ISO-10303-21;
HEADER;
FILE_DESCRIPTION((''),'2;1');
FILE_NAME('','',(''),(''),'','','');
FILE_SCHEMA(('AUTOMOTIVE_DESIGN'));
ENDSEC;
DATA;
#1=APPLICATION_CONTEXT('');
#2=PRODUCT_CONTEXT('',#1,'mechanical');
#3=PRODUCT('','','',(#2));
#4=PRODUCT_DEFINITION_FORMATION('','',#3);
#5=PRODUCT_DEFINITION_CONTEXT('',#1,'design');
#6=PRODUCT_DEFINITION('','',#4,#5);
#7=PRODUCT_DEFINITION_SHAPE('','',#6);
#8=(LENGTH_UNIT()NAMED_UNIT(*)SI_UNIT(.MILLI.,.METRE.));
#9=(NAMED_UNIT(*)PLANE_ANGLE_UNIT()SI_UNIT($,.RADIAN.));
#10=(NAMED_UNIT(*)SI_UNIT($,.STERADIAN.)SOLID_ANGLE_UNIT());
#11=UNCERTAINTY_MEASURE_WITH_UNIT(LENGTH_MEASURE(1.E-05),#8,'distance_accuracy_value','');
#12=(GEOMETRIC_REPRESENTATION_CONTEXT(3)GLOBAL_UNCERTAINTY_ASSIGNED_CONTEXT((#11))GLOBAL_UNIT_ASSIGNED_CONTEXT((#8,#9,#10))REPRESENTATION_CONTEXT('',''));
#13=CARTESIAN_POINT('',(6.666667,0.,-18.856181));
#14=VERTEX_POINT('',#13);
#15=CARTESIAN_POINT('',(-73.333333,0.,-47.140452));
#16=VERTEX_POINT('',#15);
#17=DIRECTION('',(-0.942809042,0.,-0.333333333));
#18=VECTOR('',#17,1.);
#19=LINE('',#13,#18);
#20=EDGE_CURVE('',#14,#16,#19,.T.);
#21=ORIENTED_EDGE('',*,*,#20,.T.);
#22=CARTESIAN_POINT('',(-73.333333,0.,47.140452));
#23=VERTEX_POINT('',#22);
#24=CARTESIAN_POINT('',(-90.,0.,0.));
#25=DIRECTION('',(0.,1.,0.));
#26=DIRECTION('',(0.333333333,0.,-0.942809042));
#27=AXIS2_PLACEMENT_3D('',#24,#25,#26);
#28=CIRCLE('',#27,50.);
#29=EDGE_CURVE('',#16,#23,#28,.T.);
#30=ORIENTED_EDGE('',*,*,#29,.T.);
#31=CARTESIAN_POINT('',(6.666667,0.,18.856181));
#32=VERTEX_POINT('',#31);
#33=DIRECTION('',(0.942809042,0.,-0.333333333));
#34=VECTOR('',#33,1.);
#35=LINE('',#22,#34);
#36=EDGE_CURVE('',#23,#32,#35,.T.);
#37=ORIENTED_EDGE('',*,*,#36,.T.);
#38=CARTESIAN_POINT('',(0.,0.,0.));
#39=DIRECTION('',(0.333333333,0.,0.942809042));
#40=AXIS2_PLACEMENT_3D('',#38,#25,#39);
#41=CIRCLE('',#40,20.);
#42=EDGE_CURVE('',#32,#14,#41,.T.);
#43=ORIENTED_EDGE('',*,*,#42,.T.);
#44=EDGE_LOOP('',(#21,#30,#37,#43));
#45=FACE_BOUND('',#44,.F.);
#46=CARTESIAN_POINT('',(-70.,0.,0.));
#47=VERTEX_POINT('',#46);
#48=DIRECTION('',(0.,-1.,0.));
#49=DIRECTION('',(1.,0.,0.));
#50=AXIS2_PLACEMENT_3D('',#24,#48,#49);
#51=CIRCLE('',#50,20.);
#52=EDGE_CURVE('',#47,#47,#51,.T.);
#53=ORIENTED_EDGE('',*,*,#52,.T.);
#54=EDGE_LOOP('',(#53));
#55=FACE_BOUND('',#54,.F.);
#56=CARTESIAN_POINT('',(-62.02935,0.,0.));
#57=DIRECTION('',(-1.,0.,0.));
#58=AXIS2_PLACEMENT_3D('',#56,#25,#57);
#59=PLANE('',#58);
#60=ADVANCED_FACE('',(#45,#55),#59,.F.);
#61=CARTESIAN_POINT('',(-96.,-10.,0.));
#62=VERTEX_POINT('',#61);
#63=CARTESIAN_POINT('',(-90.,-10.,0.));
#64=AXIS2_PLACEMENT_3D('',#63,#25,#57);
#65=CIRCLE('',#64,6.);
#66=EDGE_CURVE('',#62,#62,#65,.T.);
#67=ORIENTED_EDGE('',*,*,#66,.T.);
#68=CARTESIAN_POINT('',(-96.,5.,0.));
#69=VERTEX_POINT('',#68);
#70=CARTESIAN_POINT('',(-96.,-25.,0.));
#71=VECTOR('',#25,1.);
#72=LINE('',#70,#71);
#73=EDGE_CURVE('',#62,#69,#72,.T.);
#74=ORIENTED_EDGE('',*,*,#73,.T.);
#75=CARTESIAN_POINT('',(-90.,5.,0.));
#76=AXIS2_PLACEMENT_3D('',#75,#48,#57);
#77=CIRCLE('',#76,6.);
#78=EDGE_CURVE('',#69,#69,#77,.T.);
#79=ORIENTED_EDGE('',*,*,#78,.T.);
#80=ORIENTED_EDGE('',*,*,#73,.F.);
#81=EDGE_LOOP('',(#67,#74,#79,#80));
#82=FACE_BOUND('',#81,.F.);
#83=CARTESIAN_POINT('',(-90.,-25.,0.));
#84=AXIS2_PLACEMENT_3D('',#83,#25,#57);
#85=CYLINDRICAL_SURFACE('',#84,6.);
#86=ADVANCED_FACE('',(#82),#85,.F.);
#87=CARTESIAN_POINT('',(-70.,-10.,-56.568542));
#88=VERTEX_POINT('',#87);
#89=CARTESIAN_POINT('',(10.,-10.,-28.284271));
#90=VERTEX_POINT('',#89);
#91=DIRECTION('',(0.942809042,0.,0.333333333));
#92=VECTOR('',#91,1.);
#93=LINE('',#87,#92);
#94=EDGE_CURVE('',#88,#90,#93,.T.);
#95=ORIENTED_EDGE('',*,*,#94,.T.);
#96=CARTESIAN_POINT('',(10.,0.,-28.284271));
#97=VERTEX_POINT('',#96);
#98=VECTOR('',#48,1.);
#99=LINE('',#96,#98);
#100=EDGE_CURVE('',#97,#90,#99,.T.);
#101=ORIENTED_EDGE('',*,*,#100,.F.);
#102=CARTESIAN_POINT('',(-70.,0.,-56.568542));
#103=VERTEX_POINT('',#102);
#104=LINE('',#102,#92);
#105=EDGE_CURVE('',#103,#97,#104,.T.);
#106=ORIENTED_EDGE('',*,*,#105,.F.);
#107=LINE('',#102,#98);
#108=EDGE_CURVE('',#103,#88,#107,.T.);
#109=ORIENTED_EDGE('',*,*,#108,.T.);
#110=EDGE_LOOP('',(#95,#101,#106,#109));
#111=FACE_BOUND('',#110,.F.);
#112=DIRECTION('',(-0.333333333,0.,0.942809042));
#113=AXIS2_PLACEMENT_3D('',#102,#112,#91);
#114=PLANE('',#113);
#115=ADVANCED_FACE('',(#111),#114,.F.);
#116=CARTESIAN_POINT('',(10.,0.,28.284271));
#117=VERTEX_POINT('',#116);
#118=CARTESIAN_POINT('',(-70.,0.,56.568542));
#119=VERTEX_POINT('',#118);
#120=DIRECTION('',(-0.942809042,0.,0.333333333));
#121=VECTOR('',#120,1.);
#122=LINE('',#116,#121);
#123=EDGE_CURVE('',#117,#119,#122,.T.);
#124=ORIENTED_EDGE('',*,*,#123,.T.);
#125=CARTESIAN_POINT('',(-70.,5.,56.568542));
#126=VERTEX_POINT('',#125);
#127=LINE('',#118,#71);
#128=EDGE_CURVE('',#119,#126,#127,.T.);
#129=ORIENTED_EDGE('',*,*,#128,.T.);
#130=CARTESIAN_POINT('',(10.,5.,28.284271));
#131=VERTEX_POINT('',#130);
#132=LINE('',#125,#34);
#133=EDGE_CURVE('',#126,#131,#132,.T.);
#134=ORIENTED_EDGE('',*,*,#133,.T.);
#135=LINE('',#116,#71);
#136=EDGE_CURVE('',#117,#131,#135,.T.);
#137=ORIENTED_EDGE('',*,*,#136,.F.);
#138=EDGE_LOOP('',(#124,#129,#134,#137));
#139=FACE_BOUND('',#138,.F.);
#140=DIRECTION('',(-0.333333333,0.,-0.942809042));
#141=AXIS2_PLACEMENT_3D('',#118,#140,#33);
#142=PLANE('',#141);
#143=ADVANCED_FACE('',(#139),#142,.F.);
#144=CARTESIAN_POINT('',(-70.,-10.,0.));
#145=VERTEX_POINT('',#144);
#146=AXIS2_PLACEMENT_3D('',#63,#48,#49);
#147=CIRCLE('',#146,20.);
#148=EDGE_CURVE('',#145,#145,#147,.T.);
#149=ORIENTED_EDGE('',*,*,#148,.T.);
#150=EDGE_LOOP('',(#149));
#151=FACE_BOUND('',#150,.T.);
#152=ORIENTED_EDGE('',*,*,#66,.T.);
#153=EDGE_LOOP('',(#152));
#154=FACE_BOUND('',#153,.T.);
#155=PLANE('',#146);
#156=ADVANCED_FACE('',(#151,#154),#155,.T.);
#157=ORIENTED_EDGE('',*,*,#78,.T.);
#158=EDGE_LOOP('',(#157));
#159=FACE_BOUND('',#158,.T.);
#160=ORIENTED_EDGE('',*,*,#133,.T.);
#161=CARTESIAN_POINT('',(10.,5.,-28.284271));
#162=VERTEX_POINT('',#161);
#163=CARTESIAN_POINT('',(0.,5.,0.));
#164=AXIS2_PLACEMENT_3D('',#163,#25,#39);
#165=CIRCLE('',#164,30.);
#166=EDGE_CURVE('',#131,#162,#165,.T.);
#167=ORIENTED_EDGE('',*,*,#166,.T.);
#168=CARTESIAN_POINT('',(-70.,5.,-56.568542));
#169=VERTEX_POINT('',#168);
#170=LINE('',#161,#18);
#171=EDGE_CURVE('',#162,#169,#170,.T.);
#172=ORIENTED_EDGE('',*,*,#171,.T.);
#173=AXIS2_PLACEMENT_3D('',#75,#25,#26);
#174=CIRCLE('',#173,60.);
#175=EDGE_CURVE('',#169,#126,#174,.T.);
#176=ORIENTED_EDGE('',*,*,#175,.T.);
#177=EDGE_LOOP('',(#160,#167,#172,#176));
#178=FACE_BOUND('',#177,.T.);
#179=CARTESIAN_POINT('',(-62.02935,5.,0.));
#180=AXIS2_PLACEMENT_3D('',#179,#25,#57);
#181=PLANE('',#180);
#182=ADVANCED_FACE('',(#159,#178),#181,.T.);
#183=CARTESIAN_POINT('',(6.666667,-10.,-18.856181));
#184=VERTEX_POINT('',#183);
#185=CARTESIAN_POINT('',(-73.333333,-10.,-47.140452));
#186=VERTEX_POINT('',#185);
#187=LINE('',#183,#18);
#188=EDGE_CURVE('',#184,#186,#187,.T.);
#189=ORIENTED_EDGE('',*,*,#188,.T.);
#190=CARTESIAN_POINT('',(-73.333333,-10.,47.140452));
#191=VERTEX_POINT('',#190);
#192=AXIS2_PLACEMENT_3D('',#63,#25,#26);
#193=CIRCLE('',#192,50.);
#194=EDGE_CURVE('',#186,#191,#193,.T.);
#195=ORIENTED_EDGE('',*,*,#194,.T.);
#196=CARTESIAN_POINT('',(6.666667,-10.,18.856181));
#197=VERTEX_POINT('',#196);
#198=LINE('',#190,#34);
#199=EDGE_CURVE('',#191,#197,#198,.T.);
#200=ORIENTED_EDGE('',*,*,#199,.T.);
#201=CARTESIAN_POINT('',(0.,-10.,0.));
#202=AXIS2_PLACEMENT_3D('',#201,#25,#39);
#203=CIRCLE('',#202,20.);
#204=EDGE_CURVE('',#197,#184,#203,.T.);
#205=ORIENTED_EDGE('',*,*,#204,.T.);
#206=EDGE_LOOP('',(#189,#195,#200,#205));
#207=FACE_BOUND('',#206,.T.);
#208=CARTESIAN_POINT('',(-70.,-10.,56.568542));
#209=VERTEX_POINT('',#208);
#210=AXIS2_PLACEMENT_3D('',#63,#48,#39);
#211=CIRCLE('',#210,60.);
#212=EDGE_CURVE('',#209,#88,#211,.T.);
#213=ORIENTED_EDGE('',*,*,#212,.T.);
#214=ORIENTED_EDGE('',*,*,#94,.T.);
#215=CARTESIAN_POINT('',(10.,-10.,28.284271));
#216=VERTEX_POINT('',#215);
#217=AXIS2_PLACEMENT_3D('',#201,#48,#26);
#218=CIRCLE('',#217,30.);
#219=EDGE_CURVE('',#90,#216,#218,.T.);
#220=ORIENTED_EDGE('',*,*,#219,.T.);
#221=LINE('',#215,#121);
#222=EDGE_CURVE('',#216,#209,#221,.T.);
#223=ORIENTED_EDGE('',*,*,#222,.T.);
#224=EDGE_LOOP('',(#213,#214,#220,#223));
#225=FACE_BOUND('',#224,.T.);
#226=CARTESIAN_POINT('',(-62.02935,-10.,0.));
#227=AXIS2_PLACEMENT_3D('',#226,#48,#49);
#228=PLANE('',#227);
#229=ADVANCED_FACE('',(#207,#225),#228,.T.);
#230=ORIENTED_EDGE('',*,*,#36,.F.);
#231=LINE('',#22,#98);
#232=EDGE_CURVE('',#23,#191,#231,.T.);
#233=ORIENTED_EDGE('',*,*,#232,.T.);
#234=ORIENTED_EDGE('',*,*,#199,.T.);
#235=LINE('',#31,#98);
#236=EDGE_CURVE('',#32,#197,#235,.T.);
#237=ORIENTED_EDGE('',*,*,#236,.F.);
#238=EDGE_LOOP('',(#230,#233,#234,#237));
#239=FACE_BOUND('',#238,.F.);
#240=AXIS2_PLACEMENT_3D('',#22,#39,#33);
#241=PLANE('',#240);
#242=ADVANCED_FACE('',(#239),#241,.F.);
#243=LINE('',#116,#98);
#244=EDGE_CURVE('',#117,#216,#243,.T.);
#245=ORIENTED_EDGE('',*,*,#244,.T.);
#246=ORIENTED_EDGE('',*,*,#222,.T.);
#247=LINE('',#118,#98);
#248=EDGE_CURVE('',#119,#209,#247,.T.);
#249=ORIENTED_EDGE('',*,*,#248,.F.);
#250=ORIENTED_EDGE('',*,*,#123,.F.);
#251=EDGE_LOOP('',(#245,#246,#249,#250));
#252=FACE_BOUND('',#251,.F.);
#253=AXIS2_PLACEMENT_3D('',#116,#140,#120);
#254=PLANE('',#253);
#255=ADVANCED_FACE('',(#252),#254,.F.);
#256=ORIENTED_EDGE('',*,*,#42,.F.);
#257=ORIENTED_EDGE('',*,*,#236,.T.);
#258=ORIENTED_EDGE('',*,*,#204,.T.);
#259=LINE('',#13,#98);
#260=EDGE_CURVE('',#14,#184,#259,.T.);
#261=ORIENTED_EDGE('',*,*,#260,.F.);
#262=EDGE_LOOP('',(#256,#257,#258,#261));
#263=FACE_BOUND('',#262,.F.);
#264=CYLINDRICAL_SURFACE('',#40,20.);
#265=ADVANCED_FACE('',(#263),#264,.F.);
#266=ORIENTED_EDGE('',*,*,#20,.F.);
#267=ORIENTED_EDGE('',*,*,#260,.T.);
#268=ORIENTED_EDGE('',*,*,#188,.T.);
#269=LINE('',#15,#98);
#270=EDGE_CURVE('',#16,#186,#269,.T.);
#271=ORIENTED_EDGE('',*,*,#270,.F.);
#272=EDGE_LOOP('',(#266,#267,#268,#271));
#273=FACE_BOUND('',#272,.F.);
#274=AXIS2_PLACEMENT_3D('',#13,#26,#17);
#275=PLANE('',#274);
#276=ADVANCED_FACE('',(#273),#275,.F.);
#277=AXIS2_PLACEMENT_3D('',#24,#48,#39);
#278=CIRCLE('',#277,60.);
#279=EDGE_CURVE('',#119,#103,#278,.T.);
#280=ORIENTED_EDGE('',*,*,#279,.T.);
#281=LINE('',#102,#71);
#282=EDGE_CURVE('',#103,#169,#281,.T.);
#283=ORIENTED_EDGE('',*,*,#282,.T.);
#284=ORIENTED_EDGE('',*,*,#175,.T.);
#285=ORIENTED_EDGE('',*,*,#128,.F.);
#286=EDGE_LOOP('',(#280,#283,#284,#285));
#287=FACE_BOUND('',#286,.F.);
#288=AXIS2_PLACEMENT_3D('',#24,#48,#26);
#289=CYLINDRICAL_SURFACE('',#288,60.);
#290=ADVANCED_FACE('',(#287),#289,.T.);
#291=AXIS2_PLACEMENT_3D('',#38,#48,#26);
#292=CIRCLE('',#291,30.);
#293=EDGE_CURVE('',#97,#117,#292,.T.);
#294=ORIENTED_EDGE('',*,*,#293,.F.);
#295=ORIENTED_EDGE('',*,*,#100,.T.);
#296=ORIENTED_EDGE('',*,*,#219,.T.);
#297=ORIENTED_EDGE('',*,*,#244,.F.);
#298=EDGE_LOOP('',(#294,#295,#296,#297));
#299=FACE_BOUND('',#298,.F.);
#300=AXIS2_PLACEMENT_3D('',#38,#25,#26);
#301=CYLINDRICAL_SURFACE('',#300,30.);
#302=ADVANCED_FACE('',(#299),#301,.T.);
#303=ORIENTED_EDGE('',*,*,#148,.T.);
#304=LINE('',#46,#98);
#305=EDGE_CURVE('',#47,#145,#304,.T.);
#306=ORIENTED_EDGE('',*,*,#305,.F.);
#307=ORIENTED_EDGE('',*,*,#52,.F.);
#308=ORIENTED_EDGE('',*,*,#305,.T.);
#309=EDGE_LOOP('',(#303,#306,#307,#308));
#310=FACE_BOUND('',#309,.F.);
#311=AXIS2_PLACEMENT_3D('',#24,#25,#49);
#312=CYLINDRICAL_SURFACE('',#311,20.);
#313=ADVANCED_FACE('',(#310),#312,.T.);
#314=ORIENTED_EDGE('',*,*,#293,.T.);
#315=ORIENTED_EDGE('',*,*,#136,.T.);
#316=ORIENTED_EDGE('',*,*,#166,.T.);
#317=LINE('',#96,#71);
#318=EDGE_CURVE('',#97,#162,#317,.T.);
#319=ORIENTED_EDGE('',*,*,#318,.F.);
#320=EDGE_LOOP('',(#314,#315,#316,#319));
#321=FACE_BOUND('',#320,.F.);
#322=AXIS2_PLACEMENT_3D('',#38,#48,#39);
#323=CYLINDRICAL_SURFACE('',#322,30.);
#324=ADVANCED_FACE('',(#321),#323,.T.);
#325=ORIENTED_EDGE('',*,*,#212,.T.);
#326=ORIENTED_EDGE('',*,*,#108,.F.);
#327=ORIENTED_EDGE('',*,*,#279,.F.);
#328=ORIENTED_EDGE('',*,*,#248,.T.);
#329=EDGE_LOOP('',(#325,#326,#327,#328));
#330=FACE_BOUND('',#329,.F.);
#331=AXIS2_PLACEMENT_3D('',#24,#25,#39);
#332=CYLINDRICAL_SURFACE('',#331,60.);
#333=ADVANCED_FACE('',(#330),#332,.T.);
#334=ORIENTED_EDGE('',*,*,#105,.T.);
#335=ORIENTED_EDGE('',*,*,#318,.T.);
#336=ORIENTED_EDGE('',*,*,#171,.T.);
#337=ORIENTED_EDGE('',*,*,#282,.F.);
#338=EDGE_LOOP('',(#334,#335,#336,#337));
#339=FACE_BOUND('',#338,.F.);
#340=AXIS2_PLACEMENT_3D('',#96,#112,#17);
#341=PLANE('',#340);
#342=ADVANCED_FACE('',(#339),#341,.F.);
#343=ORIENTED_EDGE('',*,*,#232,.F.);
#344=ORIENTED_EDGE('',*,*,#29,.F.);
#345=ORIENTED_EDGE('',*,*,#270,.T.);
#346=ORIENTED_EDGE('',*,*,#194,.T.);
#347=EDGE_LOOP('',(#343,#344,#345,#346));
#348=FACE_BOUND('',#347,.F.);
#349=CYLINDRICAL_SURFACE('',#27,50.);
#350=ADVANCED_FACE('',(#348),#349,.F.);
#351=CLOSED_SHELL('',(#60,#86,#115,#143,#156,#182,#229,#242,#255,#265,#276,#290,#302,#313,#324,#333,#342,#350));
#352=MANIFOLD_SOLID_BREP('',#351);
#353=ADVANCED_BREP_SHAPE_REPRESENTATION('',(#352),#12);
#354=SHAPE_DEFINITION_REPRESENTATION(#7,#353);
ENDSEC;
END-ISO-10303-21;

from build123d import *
from build123d import SkipClean  # not in build123d's __all__

# Parameters (mm, degrees)
F1_DEPTH = 10
F0_R     = 20
F3_DEPTH = 5
F5_D     = 12
F5_DEPTH = 15
F5_TIP   = 3.6051637142


# Not quite as in the source:
# - after a boolean that leaves OpenCascade's solid faulty, fix() repairs it


with BuildPart() as f1:
    # F0 (on Front) → F1 (new body)
    with BuildSketch(Plane.XZ):
        with BuildLine():
            Line((10, 28.2842712475), (-70, 56.5685424949))
            ThreePointArc((-70, 56.5685424949), (-150, 0), (-70, -56.5685424949))
            Line((-70, -56.5685424949), (10, -28.2842712475))
            ThreePointArc((10, -28.2842712475), (30, 0), (10, 28.2842712475))
        make_face()
        with BuildLine():
            ThreePointArc((-73.3333333333, -47.1404520791), (-140, 0), (-73.3333333333, 47.1404520791))
            Line((-73.3333333333, 47.1404520791), (6.6666666667, 18.8561808316))
            ThreePointArc((6.6666666667, 18.8561808316), (20, 0), (6.6666666667, -18.8561808316))
            Line((6.6666666667, -18.8561808316), (-73.3333333333, -47.1404520791))
        make_face(mode=Mode.SUBTRACT)
    extrude(amount=F1_DEPTH)



with BuildPart() as f1b:
    # F0 (on Front) → F1, piece 2 (new body)
    with BuildSketch(Plane.XZ):
        with Locations((-90, 0)):
            Circle(F0_R)
    extrude(amount=F1_DEPTH)


with BuildPart() as f1_1:
    add(f1.part, clean=False)

    with SkipClean():  # cleaning this boolean's faces spoils the solid; the shape is the same uncleaned
        add(f1b.part)  # F3 merges F1b
    # F2 (on face) → F3 (join)
    with BuildSketch(Plane(origin=(0, 0, 0), x_dir=(-1, 0, 0), z_dir=(0, 1, 0))):
        with BuildLine():
            ThreePointArc((70, -56.5685424949), (150, 0), (70, 56.5685424949))
            Line((70, 56.5685424949), (-10, 28.2842712475))
            ThreePointArc((-10, 28.2842712475), (-30, 0), (-10, -28.2842712475))
            Line((-10, -28.2842712475), (70, -56.5685424949))
        make_face()
    with SkipClean():  # cleaning this boolean's faces spoils the solid; the shape is the same uncleaned
        extrude(amount=F3_DEPTH)

    # F5
    with Locations(Plane.XZ.offset(10)):
        with Locations((-90, 0)):
            Hole(F5_D / 2, depth=F5_DEPTH)
            with Locations((0, 0, -(F5_DEPTH + F5_TIP / 2))):  # 118° drill point
                Cone(0, F5_D / 2, F5_TIP, mode=Mode.SUBTRACT)

    add(f1_1.part.fix(), mode=Mode.REPLACE)


solid = f1_1.part
